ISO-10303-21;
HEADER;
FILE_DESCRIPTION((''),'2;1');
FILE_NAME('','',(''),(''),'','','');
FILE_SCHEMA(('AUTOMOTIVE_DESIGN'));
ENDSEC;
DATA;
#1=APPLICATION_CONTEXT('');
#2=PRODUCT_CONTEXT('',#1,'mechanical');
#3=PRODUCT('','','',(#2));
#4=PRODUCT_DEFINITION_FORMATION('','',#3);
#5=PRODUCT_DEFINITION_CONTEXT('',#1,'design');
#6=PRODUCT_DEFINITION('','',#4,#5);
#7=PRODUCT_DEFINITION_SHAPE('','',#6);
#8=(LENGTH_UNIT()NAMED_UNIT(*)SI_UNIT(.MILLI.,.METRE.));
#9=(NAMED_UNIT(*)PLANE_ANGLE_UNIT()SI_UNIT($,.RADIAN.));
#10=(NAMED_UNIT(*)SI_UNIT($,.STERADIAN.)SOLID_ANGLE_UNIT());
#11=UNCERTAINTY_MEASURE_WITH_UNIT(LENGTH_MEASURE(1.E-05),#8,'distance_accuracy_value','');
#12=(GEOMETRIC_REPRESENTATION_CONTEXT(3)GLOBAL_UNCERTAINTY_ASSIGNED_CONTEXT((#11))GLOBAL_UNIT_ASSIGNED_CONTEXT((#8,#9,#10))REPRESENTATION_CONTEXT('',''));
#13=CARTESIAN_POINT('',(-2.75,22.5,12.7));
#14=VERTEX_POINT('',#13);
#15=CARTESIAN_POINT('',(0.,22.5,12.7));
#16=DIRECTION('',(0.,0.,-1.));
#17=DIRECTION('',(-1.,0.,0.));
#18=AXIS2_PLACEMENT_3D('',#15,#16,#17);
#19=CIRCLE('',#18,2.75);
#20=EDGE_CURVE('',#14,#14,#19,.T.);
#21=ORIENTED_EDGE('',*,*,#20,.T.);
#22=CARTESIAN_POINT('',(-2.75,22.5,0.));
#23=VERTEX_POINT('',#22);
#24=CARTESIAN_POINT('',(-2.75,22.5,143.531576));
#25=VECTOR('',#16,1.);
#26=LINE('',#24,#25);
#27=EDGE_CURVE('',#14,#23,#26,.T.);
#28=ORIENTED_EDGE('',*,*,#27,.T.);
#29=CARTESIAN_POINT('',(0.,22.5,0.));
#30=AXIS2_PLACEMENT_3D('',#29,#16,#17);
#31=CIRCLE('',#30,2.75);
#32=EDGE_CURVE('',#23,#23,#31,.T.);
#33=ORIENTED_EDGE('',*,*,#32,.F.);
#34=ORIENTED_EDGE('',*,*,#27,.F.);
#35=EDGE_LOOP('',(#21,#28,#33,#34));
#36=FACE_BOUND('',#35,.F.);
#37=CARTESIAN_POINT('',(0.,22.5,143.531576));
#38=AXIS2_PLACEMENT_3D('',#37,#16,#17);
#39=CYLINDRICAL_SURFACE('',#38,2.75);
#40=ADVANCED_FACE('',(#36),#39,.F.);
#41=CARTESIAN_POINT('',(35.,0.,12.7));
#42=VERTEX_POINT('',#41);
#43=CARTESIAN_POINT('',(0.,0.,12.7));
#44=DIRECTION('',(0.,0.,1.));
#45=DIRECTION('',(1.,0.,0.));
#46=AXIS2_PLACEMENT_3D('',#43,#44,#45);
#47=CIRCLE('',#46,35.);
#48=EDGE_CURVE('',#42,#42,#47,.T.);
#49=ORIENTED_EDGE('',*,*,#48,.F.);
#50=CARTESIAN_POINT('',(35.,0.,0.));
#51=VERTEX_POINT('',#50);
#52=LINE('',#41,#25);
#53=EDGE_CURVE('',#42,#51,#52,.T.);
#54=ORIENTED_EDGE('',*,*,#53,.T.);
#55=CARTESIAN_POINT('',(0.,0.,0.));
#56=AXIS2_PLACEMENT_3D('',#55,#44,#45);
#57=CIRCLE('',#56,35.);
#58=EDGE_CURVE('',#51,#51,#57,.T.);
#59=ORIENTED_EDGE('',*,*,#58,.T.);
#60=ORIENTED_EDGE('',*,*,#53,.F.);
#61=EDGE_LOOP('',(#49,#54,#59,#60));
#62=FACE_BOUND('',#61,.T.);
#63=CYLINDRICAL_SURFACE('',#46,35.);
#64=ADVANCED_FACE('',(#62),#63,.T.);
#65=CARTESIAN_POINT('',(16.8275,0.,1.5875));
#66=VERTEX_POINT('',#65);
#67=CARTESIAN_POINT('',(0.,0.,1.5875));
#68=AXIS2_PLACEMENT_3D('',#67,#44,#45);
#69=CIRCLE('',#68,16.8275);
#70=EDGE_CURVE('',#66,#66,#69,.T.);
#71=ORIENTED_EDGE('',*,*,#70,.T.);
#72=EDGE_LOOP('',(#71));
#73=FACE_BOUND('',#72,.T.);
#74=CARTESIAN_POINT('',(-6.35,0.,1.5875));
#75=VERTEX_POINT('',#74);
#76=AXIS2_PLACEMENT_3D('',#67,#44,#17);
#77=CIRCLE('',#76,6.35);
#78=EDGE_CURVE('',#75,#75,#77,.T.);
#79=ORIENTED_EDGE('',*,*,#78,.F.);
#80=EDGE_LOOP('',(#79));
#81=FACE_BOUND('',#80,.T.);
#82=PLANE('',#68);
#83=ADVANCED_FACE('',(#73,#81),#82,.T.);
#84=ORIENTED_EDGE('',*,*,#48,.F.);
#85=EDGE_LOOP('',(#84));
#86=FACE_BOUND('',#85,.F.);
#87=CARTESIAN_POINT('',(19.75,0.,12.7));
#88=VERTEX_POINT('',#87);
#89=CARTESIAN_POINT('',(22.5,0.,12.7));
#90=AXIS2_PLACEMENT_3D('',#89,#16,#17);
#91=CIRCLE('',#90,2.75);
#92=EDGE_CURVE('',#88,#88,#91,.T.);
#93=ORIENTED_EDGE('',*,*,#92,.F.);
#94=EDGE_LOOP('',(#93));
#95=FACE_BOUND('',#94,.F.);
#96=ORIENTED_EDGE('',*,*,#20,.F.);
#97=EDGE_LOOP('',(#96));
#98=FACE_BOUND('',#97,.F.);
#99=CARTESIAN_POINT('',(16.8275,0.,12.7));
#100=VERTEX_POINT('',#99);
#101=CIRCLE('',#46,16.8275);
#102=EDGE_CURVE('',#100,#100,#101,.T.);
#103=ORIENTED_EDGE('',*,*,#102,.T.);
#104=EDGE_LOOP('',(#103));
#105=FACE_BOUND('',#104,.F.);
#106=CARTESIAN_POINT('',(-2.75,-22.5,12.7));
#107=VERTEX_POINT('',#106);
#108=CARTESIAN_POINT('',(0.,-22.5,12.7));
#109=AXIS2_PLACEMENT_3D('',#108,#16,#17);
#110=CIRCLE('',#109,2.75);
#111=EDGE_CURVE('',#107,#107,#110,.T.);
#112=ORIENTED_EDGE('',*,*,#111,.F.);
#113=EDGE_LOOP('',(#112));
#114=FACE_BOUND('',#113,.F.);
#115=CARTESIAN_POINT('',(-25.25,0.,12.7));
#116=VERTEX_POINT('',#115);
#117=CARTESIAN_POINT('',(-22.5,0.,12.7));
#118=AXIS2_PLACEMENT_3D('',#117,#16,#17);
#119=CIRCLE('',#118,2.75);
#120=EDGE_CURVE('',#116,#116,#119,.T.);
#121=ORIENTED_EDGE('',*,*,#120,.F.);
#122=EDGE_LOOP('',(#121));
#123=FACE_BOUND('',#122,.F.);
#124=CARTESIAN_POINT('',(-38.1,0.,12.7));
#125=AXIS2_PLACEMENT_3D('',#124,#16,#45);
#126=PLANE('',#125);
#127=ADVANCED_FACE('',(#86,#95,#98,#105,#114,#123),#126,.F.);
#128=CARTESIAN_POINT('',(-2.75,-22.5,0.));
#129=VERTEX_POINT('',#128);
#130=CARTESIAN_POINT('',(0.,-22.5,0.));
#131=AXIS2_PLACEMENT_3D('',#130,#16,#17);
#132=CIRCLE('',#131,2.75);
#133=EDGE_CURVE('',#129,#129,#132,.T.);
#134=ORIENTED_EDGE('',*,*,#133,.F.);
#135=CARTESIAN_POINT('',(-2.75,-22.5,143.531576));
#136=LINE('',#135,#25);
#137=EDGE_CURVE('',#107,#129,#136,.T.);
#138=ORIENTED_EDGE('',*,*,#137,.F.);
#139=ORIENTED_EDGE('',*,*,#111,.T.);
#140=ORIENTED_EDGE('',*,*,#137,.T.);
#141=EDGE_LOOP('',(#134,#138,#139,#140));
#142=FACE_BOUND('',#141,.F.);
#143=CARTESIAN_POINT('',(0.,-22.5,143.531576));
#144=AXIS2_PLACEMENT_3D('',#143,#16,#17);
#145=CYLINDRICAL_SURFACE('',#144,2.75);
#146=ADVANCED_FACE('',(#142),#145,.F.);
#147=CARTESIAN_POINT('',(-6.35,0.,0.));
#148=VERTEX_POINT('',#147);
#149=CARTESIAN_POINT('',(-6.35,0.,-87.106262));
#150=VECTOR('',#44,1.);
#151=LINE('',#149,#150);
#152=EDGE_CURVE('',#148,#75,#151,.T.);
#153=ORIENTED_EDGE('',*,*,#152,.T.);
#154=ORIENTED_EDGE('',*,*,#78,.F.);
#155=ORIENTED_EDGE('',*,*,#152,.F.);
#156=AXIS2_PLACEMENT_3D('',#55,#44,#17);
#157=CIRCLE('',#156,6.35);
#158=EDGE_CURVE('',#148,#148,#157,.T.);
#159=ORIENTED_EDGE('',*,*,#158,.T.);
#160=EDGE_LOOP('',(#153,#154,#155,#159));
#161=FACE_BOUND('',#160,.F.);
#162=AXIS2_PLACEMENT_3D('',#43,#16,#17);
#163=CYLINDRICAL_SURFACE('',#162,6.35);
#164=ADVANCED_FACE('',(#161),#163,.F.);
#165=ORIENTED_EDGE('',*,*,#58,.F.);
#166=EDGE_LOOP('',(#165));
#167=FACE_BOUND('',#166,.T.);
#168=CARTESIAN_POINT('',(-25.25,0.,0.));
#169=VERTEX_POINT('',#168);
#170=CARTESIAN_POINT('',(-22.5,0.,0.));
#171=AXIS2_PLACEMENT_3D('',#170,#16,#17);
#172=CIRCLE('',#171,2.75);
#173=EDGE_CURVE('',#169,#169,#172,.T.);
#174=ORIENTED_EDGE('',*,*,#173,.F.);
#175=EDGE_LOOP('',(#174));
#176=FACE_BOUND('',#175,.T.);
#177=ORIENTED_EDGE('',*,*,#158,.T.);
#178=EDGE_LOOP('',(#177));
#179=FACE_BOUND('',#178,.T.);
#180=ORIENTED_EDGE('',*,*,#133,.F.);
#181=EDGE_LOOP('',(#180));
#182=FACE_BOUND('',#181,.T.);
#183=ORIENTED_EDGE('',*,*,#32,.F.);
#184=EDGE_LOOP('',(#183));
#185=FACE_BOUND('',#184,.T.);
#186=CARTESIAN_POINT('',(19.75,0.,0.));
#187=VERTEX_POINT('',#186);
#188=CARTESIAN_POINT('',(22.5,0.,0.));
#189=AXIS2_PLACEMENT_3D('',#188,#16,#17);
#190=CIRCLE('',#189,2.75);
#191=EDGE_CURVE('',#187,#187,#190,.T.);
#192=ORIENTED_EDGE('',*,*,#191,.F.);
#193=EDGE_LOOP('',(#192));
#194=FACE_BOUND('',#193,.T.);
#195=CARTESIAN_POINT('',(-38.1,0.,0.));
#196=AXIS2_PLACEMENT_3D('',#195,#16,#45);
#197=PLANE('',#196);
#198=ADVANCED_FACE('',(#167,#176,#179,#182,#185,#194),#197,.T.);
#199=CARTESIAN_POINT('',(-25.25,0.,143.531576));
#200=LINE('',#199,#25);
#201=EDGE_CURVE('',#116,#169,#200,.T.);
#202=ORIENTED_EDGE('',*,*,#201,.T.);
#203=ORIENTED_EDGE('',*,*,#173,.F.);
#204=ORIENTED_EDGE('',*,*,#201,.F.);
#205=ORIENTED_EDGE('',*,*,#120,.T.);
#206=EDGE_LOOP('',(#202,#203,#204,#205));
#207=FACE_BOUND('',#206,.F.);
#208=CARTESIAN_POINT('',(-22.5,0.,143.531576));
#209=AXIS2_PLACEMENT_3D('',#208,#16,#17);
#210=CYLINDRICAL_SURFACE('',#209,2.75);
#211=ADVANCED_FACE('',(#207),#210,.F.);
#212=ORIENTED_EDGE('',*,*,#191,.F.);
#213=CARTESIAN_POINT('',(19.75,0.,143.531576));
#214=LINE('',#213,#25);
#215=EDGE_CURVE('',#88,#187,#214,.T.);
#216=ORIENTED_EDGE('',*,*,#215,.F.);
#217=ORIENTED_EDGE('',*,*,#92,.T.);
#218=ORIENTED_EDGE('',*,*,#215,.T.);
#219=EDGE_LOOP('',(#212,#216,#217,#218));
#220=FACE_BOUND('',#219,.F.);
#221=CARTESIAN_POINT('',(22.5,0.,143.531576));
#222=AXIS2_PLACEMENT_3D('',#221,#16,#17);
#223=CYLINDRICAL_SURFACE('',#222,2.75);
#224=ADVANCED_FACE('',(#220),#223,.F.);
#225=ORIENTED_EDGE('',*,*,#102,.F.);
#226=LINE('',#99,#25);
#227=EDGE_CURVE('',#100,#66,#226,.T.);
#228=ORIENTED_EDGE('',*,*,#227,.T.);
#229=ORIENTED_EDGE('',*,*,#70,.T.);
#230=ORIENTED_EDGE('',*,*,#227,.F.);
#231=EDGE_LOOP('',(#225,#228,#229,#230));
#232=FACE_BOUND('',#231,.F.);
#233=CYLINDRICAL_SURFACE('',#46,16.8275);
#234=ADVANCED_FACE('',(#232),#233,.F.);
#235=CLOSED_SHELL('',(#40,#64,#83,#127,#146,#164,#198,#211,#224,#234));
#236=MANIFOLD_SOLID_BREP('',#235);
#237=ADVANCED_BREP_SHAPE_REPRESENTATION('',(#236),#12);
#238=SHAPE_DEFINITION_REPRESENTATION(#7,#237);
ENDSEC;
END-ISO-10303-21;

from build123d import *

# Parameters (mm, degrees)
F0_W           = 92.075
F0_H           = 12.7
F1_DEPTH       = 46.0375
F2_R           = 16.8275
F3_DEPTH       = 11.1125
F4_D           = 5.5
F5_R           = 35
F5_R_2         = 16.8275
F6_DEPTH       = 25.4
F7_D           = 12.7
F7_CBORE_D     = 12.7
F7_CBORE_DEPTH = 6.35


# Not quite as in the source:
# - a length typed as a fraction of an inch, garbled in the dataset ("3 / 203.2 mm" for 3/8 in), is restored


with BuildPart() as f1:
    # F0 (on Front) → F1 (new body, symmetric)
    with BuildSketch(Plane.XZ):
        with Locations((7.9375, 6.35)):
            Rectangle(F0_W, F0_H)
    extrude(amount=F1_DEPTH, both=True)

    # F2 (on face) → F3 (cut)
    with BuildSketch(Plane.XY.offset(12.7)):
        Circle(F2_R)
    extrude(amount=-F3_DEPTH, mode=Mode.SUBTRACT)

    # F4 (through all)
    with Locations(Plane.XY.offset(12.7)):
        with Locations((0, 22.5), (22.5, 0), (0, -22.5), (-22.5, 0)):
            Hole(F4_D / 2)

    # F5 (on face) → F6 (intersect)
    with BuildSketch(Plane.XY.offset(12.7)):
        Circle(F5_R)
        Circle(F5_R_2, mode=Mode.SUBTRACT)
        Circle(F5_R_2)
    extrude(amount=-F6_DEPTH, mode=Mode.INTERSECT)

    # F7 (through all)
    with Locations(Plane.XY.offset(12.7)):
        with Locations((0, 0)):
            CounterBoreHole(F7_D / 2, F7_CBORE_D / 2, F7_CBORE_DEPTH)


solid = f1.part
